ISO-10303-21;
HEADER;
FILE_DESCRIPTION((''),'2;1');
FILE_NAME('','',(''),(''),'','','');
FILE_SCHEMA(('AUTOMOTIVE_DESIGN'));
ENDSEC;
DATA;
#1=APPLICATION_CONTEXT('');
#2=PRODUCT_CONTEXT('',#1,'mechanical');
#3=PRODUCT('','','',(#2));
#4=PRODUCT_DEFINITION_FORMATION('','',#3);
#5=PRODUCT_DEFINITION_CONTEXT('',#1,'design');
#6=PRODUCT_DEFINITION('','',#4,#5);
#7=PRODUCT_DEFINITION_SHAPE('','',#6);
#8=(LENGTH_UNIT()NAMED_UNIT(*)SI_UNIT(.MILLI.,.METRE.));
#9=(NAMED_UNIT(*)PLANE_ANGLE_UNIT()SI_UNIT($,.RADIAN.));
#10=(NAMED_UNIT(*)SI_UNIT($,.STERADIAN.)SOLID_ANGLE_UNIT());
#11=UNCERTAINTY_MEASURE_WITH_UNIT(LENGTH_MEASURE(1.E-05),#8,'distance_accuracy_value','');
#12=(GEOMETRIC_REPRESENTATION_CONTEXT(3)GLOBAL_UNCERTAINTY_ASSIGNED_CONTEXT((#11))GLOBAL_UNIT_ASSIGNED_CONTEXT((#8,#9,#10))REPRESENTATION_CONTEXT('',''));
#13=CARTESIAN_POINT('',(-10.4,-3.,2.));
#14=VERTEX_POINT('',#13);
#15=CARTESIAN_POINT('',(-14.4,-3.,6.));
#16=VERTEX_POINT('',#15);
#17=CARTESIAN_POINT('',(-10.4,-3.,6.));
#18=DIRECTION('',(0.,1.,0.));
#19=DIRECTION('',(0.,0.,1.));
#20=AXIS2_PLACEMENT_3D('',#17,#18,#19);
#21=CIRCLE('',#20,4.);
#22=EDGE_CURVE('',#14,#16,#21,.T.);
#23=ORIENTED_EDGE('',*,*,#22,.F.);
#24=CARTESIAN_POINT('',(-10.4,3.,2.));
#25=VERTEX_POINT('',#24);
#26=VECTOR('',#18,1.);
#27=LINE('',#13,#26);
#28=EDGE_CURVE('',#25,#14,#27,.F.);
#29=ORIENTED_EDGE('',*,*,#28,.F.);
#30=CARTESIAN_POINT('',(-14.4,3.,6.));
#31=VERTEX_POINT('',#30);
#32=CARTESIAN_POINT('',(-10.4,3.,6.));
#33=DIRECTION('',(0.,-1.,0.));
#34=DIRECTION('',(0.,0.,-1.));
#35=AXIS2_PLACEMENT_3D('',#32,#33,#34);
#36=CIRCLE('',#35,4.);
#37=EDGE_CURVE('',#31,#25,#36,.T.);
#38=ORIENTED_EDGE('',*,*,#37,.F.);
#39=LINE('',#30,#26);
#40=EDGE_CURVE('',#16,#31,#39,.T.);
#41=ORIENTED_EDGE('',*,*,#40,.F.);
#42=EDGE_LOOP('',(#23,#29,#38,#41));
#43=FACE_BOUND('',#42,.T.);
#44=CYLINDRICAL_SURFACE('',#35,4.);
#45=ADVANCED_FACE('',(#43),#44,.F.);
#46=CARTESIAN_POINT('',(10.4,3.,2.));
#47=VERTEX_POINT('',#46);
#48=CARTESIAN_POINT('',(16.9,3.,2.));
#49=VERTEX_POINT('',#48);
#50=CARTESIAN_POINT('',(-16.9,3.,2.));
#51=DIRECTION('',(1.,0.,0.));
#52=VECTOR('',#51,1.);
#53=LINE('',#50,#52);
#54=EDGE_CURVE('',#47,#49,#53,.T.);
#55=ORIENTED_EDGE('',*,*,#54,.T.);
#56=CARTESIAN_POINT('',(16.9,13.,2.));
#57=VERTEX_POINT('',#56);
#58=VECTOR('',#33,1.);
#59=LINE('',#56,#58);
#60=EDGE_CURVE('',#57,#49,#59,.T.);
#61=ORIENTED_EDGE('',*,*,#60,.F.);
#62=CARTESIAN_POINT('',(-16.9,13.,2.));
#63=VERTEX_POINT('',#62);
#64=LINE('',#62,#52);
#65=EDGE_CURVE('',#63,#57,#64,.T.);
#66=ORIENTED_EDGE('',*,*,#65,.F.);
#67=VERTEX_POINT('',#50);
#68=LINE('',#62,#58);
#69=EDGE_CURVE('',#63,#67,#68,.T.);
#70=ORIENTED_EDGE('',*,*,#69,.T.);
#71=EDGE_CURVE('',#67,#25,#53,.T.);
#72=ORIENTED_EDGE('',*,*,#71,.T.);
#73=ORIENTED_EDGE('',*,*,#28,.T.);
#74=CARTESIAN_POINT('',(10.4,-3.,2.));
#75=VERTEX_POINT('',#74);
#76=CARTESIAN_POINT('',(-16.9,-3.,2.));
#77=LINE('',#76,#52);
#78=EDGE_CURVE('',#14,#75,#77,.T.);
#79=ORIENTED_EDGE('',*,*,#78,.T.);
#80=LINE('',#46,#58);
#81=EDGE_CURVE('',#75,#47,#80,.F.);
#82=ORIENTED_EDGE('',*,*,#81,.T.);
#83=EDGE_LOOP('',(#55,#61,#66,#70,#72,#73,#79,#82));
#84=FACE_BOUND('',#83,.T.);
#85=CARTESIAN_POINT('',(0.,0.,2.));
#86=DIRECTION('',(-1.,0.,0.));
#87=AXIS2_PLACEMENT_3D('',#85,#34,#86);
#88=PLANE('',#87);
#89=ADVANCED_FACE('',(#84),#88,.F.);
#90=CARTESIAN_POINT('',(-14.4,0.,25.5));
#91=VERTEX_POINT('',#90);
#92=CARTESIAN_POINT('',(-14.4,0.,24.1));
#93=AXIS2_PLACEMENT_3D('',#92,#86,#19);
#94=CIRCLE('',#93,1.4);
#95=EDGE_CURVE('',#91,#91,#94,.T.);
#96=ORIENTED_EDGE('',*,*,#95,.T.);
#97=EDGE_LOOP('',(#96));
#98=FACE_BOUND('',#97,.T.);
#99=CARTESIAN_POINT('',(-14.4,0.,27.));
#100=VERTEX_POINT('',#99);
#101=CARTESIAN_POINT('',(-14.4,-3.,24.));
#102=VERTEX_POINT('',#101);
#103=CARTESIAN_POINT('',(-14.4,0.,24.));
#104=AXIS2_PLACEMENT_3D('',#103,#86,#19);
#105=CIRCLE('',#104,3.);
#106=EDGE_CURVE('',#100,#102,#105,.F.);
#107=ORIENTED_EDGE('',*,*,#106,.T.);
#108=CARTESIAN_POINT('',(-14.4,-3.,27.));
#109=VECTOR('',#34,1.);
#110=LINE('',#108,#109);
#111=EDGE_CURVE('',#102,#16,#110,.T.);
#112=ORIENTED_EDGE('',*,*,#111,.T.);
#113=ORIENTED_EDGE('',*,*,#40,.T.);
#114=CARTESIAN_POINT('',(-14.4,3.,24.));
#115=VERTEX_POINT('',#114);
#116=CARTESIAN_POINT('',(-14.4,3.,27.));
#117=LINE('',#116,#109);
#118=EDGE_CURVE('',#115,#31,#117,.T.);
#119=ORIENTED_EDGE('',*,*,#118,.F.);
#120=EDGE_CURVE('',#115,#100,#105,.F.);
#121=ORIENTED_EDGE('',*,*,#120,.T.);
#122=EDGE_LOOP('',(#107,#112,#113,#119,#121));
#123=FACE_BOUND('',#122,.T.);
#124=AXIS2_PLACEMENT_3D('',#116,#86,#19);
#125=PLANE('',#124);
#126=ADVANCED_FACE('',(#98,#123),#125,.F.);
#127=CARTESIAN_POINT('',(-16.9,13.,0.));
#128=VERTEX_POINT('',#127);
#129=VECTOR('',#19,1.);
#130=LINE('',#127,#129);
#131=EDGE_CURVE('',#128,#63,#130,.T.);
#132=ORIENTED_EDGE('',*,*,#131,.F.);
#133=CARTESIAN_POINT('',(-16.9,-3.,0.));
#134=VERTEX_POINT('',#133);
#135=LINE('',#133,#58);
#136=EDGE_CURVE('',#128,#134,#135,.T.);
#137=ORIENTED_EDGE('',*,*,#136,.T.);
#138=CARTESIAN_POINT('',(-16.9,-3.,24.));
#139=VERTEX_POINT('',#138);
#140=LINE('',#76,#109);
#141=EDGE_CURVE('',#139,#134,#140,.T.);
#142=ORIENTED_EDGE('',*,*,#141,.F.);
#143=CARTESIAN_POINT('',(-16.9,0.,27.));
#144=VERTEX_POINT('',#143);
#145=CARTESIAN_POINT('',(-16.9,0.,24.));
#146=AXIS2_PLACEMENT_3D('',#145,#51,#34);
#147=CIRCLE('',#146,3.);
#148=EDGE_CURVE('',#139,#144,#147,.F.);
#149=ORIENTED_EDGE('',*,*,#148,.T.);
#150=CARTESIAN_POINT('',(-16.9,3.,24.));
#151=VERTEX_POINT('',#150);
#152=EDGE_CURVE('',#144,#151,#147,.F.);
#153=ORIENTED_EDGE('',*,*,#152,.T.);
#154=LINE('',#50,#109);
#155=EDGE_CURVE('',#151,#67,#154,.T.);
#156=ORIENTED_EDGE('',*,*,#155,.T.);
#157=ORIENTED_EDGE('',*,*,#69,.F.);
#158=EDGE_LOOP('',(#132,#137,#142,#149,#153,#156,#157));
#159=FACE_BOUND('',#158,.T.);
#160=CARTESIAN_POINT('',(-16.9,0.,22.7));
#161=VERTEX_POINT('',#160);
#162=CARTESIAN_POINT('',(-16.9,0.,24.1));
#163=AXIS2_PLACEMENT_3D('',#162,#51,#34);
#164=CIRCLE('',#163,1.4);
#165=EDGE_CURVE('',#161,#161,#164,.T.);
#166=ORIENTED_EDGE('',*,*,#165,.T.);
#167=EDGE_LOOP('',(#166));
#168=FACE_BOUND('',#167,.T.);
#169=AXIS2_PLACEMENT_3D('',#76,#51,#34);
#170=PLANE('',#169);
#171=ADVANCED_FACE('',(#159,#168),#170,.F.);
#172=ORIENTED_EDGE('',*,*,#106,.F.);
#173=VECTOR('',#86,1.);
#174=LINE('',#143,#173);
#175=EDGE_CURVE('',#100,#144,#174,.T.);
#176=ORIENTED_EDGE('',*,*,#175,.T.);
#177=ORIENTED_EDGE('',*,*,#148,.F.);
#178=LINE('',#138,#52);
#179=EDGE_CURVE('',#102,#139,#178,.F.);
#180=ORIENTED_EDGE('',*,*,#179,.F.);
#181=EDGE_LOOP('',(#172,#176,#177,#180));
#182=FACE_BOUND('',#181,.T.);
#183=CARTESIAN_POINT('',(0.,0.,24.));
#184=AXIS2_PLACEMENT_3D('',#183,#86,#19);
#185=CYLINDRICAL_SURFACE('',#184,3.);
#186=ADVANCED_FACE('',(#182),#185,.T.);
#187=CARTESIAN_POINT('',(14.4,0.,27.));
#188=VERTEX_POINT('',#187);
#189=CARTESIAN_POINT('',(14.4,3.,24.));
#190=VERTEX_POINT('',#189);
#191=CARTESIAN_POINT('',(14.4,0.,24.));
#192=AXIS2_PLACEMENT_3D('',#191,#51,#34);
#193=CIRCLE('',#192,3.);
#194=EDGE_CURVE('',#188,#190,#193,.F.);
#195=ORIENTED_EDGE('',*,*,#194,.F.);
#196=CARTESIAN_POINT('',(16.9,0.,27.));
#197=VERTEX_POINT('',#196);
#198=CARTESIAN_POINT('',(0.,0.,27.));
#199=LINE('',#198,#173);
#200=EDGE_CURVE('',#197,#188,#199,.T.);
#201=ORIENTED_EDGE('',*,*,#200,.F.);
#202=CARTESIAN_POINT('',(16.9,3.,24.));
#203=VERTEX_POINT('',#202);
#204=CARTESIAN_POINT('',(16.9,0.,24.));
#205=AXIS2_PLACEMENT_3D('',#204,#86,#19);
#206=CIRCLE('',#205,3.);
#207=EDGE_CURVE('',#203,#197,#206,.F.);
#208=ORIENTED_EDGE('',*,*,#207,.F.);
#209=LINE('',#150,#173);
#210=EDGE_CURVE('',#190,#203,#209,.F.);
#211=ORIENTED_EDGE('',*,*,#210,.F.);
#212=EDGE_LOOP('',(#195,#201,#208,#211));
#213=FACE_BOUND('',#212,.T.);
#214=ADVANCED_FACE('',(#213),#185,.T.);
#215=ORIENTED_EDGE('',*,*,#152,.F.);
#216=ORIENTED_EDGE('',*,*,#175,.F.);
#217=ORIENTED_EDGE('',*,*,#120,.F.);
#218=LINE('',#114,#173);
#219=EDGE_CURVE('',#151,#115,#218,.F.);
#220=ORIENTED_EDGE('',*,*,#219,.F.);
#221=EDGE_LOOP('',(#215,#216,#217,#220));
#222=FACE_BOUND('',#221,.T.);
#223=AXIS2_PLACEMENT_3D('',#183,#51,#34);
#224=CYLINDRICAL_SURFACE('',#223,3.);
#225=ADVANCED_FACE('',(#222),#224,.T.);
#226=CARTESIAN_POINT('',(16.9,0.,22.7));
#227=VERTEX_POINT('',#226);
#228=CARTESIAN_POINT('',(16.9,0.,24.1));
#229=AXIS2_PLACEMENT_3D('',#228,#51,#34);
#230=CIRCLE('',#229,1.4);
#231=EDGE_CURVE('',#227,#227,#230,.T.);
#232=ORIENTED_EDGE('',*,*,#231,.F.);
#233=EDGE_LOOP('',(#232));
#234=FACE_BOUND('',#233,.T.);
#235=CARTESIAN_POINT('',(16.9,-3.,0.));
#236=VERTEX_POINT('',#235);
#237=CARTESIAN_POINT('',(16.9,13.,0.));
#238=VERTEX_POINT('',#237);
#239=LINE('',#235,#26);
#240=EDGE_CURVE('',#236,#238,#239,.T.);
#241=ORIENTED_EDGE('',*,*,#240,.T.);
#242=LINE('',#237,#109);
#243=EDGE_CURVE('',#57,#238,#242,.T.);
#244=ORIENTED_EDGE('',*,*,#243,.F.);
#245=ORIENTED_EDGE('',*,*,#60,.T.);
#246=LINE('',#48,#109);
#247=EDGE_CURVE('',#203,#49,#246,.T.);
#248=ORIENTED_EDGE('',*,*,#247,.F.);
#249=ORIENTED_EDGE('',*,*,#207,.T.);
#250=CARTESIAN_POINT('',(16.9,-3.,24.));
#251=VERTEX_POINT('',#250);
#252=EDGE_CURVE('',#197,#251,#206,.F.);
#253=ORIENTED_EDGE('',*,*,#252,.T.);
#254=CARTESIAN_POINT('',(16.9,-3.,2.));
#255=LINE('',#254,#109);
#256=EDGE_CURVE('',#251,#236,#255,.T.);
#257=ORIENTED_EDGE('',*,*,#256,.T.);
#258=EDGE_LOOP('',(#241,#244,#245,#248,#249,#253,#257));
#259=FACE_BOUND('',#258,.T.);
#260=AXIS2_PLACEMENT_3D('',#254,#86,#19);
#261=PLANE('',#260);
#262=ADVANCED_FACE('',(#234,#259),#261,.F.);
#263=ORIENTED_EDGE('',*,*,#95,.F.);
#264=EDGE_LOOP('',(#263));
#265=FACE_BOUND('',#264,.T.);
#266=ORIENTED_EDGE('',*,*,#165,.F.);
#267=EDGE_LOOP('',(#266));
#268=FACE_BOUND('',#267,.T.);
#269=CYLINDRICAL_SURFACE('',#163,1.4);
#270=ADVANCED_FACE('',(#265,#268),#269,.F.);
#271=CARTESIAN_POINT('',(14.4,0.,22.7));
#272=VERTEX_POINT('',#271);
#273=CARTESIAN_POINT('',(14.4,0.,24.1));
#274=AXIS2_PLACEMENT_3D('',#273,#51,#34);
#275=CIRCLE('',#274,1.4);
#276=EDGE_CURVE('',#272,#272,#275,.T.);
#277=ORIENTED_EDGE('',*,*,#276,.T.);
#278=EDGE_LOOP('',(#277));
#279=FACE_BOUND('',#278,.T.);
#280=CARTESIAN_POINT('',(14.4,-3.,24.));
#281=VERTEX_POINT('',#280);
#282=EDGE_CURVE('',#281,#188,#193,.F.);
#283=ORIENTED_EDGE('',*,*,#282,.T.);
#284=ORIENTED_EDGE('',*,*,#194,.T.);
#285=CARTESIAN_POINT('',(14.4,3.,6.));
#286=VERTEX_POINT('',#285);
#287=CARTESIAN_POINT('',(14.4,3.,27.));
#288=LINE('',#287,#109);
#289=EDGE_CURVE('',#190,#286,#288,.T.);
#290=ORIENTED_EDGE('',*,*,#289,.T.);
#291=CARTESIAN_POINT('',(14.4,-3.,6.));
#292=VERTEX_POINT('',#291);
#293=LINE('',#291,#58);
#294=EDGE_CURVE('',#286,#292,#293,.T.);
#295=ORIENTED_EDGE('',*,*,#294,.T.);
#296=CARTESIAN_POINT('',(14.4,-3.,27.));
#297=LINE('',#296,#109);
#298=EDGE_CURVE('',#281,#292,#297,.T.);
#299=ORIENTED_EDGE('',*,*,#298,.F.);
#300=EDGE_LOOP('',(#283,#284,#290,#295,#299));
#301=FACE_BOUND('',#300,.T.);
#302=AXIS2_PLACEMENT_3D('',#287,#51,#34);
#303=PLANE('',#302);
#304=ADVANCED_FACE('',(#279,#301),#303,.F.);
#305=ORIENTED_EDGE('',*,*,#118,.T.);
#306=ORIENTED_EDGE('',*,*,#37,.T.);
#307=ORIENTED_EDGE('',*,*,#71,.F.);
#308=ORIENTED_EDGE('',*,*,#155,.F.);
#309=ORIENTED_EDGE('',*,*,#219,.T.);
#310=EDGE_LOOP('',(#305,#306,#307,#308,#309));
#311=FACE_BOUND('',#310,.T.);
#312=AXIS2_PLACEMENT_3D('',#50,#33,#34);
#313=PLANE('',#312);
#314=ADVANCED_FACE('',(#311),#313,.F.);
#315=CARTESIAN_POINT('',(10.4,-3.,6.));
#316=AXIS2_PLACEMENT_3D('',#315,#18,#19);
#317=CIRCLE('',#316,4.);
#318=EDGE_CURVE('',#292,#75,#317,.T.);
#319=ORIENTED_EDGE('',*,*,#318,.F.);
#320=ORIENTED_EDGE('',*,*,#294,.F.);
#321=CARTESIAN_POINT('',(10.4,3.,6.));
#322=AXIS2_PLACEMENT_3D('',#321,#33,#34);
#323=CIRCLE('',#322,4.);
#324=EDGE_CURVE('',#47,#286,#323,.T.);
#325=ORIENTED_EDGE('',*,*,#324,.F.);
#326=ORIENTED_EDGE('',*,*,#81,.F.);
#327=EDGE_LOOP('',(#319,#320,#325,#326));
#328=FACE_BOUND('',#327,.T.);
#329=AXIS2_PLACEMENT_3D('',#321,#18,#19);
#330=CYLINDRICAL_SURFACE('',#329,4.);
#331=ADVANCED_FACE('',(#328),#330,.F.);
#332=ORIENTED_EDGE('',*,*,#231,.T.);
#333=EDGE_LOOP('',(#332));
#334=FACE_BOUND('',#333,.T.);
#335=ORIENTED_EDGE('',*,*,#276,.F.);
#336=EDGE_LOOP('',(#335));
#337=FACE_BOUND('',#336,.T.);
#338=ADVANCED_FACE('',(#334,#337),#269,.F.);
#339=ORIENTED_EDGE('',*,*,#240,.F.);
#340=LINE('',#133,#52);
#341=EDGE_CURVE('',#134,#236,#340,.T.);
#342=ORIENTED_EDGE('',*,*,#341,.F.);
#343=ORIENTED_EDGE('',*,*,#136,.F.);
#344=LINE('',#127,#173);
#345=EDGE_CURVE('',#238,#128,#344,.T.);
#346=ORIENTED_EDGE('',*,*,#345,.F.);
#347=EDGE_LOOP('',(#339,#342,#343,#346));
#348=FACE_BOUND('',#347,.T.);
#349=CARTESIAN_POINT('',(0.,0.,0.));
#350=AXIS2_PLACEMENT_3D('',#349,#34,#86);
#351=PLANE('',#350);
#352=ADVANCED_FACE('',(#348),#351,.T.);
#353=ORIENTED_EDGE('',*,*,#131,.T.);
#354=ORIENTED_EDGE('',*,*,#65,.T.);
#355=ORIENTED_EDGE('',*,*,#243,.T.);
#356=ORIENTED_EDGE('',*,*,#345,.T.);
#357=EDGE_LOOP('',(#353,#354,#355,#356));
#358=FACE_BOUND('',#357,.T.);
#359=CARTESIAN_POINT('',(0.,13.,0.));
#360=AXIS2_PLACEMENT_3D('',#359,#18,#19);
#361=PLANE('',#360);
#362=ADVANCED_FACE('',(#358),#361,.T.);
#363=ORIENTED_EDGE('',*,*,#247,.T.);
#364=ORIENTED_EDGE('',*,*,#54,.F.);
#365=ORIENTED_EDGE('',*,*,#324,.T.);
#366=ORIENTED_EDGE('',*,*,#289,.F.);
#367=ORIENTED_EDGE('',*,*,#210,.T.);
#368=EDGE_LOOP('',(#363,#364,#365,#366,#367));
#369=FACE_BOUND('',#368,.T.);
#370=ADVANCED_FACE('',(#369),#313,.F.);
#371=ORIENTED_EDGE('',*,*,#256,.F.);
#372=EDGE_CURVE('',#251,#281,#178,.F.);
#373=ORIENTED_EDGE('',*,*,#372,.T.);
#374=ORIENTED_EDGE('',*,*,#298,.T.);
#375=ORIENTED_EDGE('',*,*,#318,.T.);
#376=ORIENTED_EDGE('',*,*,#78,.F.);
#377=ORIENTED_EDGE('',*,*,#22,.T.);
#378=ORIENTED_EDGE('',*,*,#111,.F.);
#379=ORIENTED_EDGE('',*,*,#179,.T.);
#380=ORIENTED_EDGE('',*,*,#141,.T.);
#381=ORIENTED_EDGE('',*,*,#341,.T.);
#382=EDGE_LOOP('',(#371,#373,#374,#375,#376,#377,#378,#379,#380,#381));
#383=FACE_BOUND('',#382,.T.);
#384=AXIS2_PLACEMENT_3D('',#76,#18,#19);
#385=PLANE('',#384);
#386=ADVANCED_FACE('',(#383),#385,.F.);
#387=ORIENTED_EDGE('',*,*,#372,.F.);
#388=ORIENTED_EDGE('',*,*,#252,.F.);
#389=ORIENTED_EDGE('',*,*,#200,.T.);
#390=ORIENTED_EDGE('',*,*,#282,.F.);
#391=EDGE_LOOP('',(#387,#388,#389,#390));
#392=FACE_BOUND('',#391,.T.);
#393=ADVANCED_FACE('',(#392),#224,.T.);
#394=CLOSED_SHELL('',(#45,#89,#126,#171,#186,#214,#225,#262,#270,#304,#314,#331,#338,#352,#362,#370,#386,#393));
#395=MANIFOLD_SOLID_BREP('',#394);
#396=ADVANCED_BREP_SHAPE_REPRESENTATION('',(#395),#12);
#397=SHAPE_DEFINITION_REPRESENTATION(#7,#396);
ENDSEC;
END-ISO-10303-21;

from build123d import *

# Parameters (mm, degrees)
SKETCH1_W           = 33.8
SKETCH1_H           = 6
BOSS_EXTRUDE1_DEPTH = 2
SKETCH2_W           = 2.5
SKETCH2_H           = 6
BOSS_EXTRUDE2_DEPTH = 25
SKETCH3_R           = 1.4
CUT_EXTRUDE1_DEPTH  = 44.364040402
FILLET1_R           = 3
SKETCH4_W           = 33.8
SKETCH4_H           = 2
BOSS_EXTRUDE3_DEPTH = 10
FILLET2_R           = 4


with BuildPart() as part:
    # Sketch1 → Boss-Extrude1 (new body)
    with BuildSketch(Plane.XY):
        Rectangle(SKETCH1_W, SKETCH1_H)
    extrude(amount=BOSS_EXTRUDE1_DEPTH)

    # Sketch2 → Boss-Extrude2 (add)
    with BuildSketch(Plane.XY.offset(2)):
        with Locations((-15.65, 0)):
            Rectangle(SKETCH2_W, SKETCH2_H)
        with Locations((15.65, 0)):
            Rectangle(SKETCH2_W, SKETCH2_H)
    extrude(amount=BOSS_EXTRUDE2_DEPTH)

    # Sketch3 → Cut-Extrude1 (cut, through all)
    with BuildSketch(Plane(origin=(16.9, 0, 0), x_dir=(0, 0, -1), z_dir=(1, 0, 0))):
        with Locations((-24.1, 0)):
            Circle(SKETCH3_R)
    extrude(amount=-CUT_EXTRUDE1_DEPTH, mode=Mode.SUBTRACT)

    # Fillet1
    fillet1_edges = [part.edges().sort_by_distance(p)[0] for p in [
        (-15.65, -3, 27),
        (15.65, -3, 27),
        (-15.65, 3, 27),
        (15.65, 3, 27),
    ]]
    fillet(fillet1_edges, radius=FILLET1_R - 0.0001)  # a hair under: the kernel refuses the full size

    # Sketch4 → Boss-Extrude3 (add)
    with BuildSketch(Plane(origin=(0, 3, 0), x_dir=(1, 0, 0), z_dir=(0, 1, 0))):
        with Locations((0, -1)):
            Rectangle(SKETCH4_W, SKETCH4_H)
    extrude(amount=BOSS_EXTRUDE3_DEPTH)

    # Fillet2
    fillet2_edges = [part.edges().sort_by_distance(p)[0] for p in [
        (14.4, 0, 2),
        (-14.4, 0, 2),
    ]]
    fillet(fillet2_edges, radius=FILLET2_R)


solid = part.part
